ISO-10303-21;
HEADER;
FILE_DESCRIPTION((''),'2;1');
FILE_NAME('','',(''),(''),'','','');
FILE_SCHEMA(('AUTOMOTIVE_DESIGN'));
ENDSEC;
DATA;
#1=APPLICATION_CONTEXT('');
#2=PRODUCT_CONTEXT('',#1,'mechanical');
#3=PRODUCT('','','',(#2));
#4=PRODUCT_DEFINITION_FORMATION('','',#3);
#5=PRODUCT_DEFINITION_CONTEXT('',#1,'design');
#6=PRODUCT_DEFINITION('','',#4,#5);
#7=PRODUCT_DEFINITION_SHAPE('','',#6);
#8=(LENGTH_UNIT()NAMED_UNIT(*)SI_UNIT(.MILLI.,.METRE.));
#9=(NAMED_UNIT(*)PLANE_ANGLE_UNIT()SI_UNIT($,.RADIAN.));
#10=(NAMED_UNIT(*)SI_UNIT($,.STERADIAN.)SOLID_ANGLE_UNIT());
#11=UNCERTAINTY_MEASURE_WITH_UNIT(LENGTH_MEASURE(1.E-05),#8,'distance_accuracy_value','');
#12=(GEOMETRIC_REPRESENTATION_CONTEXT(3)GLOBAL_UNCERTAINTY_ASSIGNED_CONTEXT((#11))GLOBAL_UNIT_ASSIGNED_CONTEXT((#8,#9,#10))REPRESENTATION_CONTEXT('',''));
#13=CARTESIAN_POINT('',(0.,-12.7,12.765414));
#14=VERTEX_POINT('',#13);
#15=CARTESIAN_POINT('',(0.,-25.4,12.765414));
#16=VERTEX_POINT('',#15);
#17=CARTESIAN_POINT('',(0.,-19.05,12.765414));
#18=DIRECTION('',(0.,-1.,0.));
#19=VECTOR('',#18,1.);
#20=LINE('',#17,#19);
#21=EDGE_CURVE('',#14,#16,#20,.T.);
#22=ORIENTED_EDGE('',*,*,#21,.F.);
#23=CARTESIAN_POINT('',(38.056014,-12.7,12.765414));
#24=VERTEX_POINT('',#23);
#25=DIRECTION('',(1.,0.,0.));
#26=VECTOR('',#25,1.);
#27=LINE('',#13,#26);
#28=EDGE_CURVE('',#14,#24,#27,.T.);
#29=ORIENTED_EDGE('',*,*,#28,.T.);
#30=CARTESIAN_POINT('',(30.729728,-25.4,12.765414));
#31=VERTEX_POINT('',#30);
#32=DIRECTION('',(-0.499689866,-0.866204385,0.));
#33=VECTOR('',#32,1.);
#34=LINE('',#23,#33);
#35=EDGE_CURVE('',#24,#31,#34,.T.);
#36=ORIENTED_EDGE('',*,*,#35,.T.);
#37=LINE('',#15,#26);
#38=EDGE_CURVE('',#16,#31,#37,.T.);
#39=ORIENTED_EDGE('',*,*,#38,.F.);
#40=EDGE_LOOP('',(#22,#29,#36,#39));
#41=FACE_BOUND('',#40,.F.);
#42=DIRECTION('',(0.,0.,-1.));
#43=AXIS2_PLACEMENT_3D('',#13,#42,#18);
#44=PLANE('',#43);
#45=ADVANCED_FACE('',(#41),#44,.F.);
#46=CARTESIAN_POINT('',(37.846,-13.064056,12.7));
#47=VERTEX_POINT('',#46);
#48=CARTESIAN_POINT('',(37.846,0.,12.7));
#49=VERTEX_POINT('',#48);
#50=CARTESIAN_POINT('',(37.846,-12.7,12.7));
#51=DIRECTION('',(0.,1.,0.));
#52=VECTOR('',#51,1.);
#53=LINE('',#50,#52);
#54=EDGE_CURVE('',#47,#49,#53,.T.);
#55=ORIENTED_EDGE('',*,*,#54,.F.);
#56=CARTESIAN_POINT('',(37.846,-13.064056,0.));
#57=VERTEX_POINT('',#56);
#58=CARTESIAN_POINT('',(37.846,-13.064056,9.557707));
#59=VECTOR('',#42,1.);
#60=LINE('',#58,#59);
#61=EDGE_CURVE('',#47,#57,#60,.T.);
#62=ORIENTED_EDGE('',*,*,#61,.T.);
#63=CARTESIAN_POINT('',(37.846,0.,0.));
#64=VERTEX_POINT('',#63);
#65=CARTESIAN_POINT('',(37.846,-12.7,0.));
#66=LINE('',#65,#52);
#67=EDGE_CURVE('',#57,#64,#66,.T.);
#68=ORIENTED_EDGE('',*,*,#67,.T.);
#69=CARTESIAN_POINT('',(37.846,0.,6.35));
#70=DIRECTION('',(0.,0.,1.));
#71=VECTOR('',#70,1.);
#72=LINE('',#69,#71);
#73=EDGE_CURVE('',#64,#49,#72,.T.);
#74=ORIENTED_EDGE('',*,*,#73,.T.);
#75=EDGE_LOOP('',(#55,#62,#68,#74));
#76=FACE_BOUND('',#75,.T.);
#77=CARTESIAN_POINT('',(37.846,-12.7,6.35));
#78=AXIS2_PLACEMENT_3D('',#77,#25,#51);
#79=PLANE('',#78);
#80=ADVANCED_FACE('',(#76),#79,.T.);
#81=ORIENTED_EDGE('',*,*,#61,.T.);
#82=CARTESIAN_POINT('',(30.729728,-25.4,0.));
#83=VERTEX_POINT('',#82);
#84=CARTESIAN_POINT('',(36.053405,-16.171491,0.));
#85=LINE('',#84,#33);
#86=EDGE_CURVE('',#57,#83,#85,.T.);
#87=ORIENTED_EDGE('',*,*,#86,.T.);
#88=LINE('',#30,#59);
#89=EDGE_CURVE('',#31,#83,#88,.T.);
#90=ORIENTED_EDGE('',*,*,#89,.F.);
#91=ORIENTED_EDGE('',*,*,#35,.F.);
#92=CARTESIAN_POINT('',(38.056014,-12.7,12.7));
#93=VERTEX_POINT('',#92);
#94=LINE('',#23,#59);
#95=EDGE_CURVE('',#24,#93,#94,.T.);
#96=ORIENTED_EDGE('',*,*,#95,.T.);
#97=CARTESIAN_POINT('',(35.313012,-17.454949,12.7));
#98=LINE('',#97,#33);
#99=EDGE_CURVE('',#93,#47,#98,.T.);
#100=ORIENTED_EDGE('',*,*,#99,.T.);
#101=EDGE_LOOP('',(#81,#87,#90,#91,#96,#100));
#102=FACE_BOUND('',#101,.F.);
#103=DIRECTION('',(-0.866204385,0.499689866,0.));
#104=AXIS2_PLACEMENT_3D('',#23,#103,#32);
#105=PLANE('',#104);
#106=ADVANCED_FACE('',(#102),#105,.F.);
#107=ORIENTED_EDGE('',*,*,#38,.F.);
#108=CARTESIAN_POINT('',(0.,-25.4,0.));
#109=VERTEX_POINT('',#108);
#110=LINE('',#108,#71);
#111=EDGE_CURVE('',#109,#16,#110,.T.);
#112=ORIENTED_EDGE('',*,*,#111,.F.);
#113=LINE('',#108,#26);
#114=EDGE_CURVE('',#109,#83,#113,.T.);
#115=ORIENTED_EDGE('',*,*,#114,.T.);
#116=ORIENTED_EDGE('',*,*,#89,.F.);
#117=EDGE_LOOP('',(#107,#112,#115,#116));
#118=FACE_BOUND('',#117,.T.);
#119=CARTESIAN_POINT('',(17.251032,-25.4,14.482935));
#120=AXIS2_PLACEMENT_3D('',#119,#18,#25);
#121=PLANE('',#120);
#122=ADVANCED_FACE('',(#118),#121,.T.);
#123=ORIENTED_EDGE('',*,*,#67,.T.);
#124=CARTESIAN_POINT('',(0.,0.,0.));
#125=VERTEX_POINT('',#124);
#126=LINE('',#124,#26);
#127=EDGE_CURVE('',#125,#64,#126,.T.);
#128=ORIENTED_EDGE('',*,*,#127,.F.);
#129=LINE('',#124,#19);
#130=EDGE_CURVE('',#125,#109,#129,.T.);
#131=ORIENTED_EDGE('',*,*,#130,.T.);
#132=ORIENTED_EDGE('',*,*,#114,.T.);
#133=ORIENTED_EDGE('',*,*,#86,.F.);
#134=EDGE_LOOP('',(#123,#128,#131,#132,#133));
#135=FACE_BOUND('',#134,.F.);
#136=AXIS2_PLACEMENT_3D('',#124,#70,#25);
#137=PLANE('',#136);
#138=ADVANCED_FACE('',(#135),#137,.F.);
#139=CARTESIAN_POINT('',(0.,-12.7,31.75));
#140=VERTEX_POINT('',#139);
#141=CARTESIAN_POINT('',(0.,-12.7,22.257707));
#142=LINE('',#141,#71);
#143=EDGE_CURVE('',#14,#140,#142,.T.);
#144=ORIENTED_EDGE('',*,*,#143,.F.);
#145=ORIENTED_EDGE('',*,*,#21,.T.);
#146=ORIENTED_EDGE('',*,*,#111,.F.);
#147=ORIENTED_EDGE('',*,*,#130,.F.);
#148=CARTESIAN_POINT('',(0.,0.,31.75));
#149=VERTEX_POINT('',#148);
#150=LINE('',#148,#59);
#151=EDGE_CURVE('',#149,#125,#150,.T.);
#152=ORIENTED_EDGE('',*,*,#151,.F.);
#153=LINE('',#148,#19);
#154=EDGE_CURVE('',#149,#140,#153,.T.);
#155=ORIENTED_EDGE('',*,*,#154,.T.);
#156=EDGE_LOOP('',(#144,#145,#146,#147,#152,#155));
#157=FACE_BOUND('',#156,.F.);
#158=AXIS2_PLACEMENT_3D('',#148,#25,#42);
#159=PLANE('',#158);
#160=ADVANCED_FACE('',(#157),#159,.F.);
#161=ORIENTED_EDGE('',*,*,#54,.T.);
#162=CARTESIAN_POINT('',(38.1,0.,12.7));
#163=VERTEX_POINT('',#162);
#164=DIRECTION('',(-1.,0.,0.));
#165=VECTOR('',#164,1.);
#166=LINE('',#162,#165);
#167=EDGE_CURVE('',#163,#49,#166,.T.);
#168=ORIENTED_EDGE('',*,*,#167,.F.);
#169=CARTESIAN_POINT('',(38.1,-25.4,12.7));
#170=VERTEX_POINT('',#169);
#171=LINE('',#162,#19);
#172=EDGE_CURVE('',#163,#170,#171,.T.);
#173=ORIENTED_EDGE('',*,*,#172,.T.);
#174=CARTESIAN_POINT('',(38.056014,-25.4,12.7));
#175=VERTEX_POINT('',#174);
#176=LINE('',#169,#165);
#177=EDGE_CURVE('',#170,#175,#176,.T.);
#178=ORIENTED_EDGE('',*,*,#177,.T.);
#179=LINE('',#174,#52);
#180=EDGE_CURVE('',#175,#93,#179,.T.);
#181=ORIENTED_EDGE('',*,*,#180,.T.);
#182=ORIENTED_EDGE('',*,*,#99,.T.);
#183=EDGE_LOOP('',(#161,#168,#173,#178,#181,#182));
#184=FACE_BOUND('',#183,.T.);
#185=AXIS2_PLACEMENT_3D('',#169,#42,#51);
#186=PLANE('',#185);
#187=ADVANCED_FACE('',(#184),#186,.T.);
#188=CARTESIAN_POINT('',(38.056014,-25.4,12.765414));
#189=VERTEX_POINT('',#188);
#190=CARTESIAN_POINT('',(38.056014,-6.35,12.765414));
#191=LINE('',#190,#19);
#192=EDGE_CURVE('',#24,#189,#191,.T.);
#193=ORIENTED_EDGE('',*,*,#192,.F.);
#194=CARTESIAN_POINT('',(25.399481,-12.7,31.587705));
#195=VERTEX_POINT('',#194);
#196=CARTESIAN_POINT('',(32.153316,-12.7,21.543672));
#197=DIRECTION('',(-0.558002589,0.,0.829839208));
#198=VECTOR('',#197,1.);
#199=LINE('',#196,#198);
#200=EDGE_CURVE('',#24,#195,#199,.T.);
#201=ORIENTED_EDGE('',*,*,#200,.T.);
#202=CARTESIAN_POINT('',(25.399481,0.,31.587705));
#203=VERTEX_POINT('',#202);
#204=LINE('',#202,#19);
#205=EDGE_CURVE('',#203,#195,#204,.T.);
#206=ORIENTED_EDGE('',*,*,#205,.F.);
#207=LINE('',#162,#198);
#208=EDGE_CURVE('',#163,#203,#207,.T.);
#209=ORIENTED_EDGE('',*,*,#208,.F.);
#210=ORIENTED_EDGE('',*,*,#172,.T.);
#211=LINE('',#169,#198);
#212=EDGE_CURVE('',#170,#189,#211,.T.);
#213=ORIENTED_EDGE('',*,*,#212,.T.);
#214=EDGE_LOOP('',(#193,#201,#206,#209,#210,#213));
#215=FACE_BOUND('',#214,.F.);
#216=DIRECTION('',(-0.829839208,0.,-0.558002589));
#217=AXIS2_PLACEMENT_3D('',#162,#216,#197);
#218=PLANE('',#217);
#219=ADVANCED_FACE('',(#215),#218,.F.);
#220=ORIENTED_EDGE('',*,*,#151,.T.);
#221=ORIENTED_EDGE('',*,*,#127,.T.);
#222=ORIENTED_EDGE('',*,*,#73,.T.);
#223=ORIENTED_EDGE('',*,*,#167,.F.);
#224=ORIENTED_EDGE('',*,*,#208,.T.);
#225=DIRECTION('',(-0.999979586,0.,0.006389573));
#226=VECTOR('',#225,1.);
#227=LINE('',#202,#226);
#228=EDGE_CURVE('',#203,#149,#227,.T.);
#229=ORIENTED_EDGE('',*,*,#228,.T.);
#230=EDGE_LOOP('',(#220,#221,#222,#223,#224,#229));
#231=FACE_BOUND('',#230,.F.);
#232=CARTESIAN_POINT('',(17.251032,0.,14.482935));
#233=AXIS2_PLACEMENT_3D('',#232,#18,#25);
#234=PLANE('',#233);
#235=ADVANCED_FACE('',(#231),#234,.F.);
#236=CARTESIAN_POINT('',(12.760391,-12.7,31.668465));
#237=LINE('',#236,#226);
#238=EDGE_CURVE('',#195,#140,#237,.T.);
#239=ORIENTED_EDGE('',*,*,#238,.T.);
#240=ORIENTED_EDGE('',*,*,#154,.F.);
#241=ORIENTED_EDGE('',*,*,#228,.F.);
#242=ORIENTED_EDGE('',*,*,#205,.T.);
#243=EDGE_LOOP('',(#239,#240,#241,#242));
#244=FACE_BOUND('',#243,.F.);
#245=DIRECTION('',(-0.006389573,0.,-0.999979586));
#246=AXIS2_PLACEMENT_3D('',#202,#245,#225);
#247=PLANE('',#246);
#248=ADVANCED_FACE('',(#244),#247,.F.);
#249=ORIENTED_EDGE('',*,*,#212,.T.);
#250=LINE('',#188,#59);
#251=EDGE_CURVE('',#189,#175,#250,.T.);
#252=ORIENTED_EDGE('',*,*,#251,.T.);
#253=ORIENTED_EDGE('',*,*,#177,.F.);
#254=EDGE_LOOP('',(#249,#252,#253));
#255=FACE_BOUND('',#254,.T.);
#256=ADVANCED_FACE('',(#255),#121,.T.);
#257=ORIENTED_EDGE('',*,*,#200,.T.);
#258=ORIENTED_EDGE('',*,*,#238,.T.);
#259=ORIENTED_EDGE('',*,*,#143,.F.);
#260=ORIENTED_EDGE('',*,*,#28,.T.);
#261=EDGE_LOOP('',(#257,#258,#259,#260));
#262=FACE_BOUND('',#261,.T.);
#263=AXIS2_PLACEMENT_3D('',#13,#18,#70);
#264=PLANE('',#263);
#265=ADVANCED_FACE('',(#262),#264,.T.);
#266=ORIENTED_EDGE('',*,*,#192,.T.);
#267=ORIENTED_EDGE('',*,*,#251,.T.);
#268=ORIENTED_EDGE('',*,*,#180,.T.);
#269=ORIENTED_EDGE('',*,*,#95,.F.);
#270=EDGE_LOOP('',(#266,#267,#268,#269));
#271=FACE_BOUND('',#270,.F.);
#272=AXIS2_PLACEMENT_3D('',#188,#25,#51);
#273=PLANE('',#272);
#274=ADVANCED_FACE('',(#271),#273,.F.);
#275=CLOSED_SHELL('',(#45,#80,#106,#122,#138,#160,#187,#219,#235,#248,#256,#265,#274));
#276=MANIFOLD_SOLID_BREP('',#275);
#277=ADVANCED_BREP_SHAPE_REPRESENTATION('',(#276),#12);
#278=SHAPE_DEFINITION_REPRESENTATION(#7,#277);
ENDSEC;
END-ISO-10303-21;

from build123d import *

# Parameters (mm, degrees)
F1_DEPTH  = 25.4
F3_DEPTH  = 82
F1_FACE_W = 25.4
F1_FACE_H = 31.75
F4_DEPTH  = 25.4
F5_W      = 12.7
F5_H      = 18.9845859185
F6_DEPTH  = 38.101
F8_DEPTH  = 25.4
F9_W      = 25.4
F9_H      = 12.7
F10_DEPTH = 0.254


# Not quite as in the source:
# - an extrude ends at something that could not be found from the text; its depth is read off the source's solid


with BuildPart() as f1:
    # F0 (on Front) → F1 (new body)
    with BuildSketch(Plane.XZ):
        Polygon((25.3994814964, 31.5877048481), (0, 31.75), (0, 0), (38.1, 0), (38.1, 12.7), align=None)
    extrude(amount=F1_DEPTH)

    # F2 (on Right) → F3 (cut, through all)
    with BuildSketch(Plane.YZ):
        Polygon((-12.9239121452, 31.9192558527), (-25.5880542099, 31.9192558527), (-25.4064481705, 12.6858642325), (-12.9239121452, 12.6858642325), align=None)
    extrude(amount=-F3_DEPTH, mode=Mode.SUBTRACT)

    # F2 (on Right) + F1_face (on face) → F4 (cut)
    with BuildSketch(Plane.YZ):
        Polygon((-12.9239121452, 31.9192558527), (-25.5880542099, 31.9192558527), (-25.4064481705, 12.6858642325), (-12.9239121452, 12.6858642325), align=None)
    with BuildSketch(Plane(origin=(0, -12.7, 15.875), x_dir=(0, -1, 0), z_dir=(-1, 0, 0))):
        Rectangle(F1_FACE_W, F1_FACE_H)
    extrude(amount=-F4_DEPTH, dir=(1, 0, 0), mode=Mode.SUBTRACT)

    # F5 (on face) → F6 (cut, through all)
    with BuildSketch(Plane(origin=(0, 0, 0), x_dir=(0, -1, 0), z_dir=(-1, 0, 0))):
        with Locations((19.05, 22.2577070408)):
            Rectangle(F5_W, F5_H)
    extrude(amount=-F6_DEPTH, mode=Mode.SUBTRACT)

    # F7 (on face) → F8 (cut)
    with BuildSketch(Plane.XY.offset(12.7654140815)):
        Polygon((38.056014097, -25.4), (38.056014097, -12.7), (30.7297278196, -25.4), align=None)
    extrude(amount=-F8_DEPTH, mode=Mode.SUBTRACT)

    # F9 (on face) → F10 (cut)
    with BuildSketch(Plane.YZ.offset(38.1)):
        with Locations((-12.7, 6.35)):
            Rectangle(F9_W, F9_H)
    extrude(amount=-F10_DEPTH, mode=Mode.SUBTRACT)


solid = f1.part
